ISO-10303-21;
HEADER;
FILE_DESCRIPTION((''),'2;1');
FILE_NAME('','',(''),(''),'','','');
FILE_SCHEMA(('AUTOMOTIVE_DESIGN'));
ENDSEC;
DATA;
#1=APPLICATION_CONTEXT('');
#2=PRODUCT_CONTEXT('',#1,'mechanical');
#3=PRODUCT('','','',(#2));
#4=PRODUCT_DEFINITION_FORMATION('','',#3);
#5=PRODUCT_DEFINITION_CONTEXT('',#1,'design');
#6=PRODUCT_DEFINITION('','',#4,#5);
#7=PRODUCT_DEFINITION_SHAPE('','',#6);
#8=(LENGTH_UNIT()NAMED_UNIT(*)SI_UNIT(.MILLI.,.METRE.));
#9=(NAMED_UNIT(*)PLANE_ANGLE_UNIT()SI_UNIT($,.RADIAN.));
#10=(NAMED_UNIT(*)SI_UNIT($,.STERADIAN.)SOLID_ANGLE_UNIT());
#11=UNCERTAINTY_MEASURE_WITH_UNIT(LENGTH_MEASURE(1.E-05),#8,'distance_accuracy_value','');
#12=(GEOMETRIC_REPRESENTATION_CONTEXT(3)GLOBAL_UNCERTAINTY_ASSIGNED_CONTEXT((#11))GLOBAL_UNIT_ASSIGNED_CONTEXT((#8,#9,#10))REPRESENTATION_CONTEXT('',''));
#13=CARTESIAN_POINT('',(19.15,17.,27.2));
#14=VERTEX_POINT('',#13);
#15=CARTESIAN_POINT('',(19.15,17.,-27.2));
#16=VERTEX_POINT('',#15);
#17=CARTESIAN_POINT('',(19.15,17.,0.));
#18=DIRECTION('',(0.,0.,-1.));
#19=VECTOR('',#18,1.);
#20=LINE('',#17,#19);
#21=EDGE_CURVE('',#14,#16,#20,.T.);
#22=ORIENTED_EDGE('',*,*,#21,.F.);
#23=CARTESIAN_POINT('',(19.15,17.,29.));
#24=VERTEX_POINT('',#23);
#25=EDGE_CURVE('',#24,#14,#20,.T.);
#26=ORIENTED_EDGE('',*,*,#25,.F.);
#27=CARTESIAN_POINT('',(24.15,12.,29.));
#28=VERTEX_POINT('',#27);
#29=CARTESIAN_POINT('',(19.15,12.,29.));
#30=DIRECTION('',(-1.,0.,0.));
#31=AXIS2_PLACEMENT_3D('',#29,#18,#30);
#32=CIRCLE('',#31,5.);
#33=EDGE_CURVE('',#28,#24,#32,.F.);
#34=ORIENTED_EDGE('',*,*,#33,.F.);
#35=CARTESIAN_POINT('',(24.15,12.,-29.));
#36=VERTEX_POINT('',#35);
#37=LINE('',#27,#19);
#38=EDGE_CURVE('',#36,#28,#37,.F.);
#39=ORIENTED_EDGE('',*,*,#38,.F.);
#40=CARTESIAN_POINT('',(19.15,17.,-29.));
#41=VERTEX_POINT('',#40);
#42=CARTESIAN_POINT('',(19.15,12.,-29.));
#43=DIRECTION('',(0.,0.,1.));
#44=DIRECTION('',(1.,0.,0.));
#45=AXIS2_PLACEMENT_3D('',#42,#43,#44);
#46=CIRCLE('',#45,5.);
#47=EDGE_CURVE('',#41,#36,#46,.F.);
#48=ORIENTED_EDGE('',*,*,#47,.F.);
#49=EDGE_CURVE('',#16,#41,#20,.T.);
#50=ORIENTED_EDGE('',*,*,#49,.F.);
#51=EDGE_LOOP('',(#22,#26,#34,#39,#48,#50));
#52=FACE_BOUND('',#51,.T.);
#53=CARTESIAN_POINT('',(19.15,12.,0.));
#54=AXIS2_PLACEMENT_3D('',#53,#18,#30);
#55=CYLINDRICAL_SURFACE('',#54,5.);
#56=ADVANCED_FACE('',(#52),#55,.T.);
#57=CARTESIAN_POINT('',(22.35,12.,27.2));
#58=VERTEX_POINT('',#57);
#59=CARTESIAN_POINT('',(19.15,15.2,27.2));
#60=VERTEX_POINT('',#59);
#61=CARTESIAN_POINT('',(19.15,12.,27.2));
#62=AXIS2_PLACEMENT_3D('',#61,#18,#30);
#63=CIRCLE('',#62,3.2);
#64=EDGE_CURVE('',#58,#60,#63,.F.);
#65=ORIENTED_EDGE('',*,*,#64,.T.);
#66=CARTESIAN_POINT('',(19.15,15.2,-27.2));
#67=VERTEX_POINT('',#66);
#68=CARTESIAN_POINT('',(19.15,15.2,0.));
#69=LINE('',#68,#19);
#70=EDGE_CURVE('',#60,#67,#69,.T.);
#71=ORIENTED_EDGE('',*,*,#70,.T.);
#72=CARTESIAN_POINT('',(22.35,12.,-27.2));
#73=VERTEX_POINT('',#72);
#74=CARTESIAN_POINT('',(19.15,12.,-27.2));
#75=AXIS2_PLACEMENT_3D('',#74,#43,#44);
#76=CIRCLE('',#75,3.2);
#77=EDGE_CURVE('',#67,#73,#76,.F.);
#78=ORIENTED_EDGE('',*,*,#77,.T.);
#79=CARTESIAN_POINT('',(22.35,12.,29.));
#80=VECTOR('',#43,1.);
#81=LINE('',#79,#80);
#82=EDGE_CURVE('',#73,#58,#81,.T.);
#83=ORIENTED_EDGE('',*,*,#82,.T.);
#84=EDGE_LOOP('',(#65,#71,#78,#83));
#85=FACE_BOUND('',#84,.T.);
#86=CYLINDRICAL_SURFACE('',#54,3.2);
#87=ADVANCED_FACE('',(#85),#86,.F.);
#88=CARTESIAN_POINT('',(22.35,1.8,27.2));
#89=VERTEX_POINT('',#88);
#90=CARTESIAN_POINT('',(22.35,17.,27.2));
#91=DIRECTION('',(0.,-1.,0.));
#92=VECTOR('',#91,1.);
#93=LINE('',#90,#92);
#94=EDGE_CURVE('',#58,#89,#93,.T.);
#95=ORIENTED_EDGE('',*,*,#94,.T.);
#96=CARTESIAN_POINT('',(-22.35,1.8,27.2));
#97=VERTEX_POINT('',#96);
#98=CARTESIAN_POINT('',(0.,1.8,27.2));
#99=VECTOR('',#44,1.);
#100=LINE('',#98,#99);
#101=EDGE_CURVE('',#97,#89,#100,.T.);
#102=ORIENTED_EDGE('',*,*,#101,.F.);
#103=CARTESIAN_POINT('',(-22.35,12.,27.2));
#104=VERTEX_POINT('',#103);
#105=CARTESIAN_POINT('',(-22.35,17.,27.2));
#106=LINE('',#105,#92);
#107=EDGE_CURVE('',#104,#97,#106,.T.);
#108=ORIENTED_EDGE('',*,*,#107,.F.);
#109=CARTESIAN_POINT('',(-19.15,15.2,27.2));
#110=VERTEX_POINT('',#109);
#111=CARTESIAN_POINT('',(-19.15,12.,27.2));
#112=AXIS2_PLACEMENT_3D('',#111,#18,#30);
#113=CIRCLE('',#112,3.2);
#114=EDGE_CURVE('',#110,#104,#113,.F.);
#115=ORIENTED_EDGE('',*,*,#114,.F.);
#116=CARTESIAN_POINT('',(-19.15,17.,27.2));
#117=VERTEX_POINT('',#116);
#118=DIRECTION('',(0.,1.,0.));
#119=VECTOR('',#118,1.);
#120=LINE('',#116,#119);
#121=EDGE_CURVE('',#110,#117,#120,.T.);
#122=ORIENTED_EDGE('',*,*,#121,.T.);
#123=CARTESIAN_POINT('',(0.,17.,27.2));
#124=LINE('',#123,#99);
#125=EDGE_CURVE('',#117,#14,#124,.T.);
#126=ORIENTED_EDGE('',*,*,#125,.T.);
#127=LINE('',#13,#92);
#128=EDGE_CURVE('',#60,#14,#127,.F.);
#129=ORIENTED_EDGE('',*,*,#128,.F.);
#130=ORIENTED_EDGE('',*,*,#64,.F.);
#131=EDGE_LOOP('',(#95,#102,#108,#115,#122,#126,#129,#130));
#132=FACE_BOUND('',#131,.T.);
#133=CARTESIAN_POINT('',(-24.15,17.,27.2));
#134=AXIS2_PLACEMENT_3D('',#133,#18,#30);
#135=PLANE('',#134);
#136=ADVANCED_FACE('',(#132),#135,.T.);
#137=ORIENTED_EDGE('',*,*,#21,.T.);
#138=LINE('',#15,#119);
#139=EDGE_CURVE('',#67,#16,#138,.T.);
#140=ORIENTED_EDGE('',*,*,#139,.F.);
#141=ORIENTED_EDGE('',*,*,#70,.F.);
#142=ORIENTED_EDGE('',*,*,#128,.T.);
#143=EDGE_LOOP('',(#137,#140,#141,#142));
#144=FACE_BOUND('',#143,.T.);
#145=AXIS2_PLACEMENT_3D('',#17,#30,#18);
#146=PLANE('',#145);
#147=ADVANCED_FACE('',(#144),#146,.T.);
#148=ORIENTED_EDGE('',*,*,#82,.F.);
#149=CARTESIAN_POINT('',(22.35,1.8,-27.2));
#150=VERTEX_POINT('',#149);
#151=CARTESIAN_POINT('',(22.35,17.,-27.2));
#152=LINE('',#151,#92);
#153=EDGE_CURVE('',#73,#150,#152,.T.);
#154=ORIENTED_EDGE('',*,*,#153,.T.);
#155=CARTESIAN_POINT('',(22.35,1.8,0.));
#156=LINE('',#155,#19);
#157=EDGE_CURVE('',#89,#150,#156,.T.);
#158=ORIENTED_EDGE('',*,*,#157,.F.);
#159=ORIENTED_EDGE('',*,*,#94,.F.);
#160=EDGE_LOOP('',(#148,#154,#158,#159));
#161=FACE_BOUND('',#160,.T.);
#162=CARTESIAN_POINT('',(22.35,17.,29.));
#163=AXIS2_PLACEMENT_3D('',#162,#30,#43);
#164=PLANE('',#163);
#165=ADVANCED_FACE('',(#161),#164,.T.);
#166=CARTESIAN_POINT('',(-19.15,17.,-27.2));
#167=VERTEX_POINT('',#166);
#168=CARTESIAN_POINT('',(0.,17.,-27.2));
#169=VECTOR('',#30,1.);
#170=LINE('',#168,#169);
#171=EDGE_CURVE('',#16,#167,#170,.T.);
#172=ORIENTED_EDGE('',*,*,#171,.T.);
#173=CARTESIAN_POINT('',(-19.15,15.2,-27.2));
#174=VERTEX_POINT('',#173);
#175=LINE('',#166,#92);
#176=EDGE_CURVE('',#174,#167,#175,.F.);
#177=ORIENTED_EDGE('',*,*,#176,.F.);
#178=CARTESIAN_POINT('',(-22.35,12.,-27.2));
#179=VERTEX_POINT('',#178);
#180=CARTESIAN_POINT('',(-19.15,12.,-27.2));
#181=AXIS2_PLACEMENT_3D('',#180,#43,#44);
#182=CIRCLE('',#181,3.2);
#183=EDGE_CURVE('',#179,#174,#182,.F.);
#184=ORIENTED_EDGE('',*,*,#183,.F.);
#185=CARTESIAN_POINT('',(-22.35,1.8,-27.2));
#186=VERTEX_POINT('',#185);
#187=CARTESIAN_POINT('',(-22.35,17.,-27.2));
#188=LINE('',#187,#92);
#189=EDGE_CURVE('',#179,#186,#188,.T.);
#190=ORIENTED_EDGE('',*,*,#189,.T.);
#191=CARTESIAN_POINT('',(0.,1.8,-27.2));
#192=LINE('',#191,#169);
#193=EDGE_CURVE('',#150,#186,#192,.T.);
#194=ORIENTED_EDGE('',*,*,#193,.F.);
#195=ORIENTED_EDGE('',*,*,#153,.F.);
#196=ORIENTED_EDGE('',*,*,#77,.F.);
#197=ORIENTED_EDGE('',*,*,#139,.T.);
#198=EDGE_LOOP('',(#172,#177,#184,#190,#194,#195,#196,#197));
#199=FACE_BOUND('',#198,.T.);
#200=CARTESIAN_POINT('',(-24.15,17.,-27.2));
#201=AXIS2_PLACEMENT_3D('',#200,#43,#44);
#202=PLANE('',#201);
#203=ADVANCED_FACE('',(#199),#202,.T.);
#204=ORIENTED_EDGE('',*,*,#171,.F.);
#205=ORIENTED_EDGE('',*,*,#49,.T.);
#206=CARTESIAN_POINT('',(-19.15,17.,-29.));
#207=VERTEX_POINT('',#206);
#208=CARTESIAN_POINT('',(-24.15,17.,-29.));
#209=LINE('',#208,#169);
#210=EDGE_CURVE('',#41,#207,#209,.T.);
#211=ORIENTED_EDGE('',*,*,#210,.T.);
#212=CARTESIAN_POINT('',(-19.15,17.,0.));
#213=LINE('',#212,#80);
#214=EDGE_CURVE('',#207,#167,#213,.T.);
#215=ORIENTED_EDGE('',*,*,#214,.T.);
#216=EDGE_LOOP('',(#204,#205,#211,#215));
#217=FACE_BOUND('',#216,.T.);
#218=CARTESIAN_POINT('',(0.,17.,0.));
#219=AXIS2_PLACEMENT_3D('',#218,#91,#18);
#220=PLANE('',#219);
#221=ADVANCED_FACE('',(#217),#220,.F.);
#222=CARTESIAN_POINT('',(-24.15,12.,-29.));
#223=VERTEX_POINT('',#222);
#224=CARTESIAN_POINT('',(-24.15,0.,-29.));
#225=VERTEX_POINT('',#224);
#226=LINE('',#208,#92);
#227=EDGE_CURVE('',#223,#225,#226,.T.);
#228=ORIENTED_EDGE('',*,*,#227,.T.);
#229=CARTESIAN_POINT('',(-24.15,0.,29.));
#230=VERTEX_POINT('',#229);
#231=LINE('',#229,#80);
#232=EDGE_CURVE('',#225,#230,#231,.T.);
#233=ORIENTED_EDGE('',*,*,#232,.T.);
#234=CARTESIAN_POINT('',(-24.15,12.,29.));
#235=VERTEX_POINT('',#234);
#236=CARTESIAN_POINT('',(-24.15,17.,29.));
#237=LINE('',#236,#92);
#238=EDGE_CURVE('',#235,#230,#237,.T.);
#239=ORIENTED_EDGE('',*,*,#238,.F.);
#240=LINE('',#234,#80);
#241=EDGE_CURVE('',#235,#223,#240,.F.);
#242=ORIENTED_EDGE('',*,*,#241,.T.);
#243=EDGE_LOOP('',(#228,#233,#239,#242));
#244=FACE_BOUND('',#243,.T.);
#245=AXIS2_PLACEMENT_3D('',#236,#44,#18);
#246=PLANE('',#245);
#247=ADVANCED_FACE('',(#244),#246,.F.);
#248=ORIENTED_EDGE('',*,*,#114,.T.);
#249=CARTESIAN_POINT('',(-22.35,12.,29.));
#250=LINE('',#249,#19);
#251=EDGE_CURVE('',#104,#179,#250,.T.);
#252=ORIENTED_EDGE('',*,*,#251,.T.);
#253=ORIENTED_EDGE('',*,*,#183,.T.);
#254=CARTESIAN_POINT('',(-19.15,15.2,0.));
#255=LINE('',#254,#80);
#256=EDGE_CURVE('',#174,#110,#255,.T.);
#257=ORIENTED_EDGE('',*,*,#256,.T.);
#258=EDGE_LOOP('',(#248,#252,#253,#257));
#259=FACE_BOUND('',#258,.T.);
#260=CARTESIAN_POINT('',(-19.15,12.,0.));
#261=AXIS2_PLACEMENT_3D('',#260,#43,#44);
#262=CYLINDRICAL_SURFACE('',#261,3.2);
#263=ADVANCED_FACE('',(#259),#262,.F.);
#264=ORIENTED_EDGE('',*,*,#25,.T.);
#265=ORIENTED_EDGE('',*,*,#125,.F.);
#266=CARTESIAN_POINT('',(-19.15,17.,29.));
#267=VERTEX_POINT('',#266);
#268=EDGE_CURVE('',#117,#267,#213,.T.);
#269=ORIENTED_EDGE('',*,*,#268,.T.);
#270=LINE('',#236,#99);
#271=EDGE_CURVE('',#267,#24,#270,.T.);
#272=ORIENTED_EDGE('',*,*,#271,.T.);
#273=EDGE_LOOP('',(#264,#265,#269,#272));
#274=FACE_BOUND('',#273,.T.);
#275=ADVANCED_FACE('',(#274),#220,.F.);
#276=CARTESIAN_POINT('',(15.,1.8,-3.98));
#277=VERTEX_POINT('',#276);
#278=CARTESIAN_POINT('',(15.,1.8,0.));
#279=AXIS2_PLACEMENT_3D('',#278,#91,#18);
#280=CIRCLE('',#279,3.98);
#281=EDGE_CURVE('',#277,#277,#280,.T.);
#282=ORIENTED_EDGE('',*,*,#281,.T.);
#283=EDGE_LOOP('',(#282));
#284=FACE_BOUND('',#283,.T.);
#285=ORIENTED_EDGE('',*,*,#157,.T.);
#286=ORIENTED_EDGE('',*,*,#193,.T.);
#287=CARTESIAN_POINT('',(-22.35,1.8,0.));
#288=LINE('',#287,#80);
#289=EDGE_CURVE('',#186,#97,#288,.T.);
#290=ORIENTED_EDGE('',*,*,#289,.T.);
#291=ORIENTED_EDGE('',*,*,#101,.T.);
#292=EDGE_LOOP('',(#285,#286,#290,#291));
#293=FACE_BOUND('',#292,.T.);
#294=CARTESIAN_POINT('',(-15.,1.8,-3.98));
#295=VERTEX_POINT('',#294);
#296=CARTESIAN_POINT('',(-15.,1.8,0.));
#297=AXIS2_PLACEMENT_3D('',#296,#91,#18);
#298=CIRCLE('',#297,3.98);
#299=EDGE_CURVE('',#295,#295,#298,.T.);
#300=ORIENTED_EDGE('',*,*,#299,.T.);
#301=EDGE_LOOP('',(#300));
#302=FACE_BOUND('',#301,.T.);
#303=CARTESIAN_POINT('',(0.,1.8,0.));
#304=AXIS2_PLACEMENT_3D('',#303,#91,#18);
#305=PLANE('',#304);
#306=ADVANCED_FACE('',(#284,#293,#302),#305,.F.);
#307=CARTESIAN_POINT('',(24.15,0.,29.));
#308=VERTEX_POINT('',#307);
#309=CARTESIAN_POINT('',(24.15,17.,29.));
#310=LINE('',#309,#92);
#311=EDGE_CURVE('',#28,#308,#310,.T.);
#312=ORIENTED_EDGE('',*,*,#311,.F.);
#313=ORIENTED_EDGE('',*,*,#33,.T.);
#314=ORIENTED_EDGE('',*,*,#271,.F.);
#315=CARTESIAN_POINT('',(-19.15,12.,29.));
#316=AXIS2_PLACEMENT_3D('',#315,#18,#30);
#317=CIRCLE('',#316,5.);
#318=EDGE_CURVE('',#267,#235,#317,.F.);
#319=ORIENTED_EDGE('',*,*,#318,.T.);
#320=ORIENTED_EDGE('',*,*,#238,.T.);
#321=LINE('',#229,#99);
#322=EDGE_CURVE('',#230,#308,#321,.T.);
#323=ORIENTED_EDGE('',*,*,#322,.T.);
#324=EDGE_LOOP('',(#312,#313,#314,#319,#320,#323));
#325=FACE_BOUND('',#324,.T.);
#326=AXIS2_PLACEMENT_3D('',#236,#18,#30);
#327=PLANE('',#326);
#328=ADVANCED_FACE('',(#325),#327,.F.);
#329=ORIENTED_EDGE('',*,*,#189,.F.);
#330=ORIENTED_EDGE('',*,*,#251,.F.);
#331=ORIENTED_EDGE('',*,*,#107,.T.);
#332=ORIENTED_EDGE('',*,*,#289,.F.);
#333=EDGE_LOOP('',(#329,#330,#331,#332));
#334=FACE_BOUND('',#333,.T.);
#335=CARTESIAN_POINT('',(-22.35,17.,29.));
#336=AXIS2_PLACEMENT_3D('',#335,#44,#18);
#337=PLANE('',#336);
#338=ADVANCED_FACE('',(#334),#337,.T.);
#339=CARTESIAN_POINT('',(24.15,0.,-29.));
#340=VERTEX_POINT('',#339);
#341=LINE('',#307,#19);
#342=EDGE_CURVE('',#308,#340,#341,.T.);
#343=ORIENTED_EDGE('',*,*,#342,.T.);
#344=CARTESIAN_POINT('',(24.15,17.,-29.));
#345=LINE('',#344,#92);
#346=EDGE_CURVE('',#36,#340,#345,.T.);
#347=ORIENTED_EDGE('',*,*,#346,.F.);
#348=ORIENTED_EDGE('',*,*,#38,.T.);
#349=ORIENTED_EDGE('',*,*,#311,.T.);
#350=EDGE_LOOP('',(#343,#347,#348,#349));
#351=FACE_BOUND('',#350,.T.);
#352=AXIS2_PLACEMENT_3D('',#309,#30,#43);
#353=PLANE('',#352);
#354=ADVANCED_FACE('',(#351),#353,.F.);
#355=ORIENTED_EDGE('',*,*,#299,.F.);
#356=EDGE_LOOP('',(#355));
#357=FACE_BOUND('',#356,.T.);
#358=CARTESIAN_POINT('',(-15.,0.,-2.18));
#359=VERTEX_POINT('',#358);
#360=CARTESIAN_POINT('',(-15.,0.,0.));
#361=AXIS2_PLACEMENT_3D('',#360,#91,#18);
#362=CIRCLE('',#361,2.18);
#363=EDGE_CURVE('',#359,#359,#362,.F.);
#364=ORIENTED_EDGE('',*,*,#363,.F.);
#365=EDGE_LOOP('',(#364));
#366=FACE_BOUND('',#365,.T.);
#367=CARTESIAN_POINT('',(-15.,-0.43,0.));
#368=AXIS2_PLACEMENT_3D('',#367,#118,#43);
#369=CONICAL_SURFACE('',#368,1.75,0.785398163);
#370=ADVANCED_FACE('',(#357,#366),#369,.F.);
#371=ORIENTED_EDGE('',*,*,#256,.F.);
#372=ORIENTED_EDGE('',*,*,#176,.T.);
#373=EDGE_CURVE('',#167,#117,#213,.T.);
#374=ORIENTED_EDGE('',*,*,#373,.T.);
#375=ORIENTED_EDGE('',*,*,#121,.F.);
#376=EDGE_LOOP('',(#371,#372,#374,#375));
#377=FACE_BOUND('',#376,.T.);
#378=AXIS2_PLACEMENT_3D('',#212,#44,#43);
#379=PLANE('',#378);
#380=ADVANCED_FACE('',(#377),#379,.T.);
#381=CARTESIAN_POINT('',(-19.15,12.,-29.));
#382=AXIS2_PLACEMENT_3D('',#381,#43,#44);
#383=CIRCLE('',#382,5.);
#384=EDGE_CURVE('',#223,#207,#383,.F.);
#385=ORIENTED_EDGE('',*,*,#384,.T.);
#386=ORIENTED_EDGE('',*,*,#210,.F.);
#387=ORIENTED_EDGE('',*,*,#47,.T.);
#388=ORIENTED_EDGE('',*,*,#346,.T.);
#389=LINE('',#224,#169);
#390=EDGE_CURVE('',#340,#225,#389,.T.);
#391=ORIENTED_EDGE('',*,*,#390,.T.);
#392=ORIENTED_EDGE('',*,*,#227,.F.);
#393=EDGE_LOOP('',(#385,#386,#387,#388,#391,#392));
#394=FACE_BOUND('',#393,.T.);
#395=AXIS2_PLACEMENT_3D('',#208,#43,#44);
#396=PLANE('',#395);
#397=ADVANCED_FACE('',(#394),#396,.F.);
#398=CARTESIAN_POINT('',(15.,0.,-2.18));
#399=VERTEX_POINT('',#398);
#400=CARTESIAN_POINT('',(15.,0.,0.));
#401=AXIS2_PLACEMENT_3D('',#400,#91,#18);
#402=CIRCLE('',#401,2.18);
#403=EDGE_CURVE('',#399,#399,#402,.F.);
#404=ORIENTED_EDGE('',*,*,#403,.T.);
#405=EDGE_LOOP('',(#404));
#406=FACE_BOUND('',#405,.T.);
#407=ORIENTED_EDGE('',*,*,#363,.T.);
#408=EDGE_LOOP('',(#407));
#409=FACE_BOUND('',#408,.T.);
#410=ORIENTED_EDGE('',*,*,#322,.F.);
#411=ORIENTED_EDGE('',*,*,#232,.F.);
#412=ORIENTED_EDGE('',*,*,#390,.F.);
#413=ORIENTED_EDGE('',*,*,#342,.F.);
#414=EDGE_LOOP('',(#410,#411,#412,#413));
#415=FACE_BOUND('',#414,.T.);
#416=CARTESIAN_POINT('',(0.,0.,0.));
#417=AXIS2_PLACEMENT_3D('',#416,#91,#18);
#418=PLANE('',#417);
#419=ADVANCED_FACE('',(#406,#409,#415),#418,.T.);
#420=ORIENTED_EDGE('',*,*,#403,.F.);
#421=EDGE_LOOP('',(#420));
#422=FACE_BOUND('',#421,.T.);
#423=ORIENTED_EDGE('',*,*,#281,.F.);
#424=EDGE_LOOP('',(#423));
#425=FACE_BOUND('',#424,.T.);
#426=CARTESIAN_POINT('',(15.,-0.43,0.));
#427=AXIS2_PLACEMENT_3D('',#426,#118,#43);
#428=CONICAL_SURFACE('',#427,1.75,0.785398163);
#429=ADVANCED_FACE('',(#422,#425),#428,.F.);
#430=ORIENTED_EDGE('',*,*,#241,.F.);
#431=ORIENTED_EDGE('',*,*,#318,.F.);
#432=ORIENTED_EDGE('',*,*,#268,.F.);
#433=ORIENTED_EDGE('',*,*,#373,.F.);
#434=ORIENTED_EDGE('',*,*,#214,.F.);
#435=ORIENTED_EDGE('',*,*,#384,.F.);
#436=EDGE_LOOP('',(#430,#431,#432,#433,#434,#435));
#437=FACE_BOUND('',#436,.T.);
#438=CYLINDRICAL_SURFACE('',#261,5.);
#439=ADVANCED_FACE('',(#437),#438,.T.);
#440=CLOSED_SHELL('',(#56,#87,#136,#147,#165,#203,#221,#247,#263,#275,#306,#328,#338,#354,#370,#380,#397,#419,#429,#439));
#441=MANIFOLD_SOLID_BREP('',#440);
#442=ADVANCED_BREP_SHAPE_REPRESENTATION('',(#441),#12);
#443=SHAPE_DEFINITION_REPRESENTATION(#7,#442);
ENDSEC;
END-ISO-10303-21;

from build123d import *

# Parameters (mm, degrees)
SKETCH1_W           = 48.3
SKETCH1_H           = 58
BOSS_EXTRUDE1_DEPTH = 17
FILLET1_R           = 5
SHELL2_START        = -27.2
SHELL2_DEPTH        = 54.4
SKETCH2_R           = 1.75
CUT_EXTRUDE1_DEPTH  = 17
CHAMFER1_SIZE       = 2.23


# Read off the part's stored shape, not the designer's step: Shell2
with BuildPart() as part:
    # Sketch1 → Boss-Extrude1 (new body)
    with BuildSketch(Plane(origin=(0, 0, 0), x_dir=(1, 0, 0), z_dir=(0, 1, 0))):
        Rectangle(SKETCH1_W, SKETCH1_H)
    extrude(amount=BOSS_EXTRUDE1_DEPTH)

    # Fillet1
    fillet1_edges = [part.edges().sort_by_distance(p)[0] for p in [
        (-24.15, 17, 0),
        (24.15, 17, 0),
    ]]
    fillet(fillet1_edges, radius=FILLET1_R)

    # Shell2 outline → Shell2 (cut)
    with BuildSketch(Plane.XY.offset(SHELL2_START)):
        with BuildLine():
            Line((19.15, 15.2), (19.15, 17))
            Line((19.15, 17), (-19.15, 17))
            Line((-19.15, 17), (-19.15, 15.2))
            ThreePointArc((-19.15, 15.2), (-21.4127417, 14.2627417), (-22.35, 12))
            Line((-22.35, 12), (-22.35, 1.8))
            Line((-22.35, 1.8), (22.35, 1.8))
            Line((22.35, 1.8), (22.35, 12))
            ThreePointArc((22.35, 12), (21.4127417, 14.2627417), (19.15, 15.2))
        make_face()
    extrude(amount=SHELL2_DEPTH, mode=Mode.SUBTRACT)

    # Sketch2 → Cut-Extrude1 (cut)
    with BuildSketch(Plane(origin=(0, 1.8, 0), x_dir=(1, 0, 0), z_dir=(0, 1, 0))):
        with Locations(Location((-15, 0, 0), (0, 0, 270))):
            Circle(SKETCH2_R)
        with Locations(Location((15, 0, 0), (0, 0, 270))):
            Circle(SKETCH2_R)
    extrude(amount=-CUT_EXTRUDE1_DEPTH, mode=Mode.SUBTRACT)

    # Chamfer1
    # the kernel refuses this chamfer: 2.23 mm, written as the material it takes off along each edge
    with BuildSketch(Plane(origin=(-15, 1.8, 0), x_dir=(0, 0, 1), z_dir=(-1, 0, 0))) as chamfer1_piece_1:
        Polygon((1.75, -CHAMFER1_SIZE), (1.75 + CHAMFER1_SIZE, 0), (1.75, 0), align=None)
    revolve(axis=Axis((-15, 1.8, 0), (0, 1, 0)), mode=Mode.SUBTRACT)
    with BuildSketch(Plane(origin=(15, 1.8, 0), x_dir=(0, 0, 1), z_dir=(-1, 0, 0))) as chamfer1_piece_2:
        Polygon((1.75, -CHAMFER1_SIZE), (1.75 + CHAMFER1_SIZE, 0), (1.75, 0), align=None)
    revolve(axis=Axis((15, 1.8, 0), (0, 1, 0)), mode=Mode.SUBTRACT)


solid = part.part
